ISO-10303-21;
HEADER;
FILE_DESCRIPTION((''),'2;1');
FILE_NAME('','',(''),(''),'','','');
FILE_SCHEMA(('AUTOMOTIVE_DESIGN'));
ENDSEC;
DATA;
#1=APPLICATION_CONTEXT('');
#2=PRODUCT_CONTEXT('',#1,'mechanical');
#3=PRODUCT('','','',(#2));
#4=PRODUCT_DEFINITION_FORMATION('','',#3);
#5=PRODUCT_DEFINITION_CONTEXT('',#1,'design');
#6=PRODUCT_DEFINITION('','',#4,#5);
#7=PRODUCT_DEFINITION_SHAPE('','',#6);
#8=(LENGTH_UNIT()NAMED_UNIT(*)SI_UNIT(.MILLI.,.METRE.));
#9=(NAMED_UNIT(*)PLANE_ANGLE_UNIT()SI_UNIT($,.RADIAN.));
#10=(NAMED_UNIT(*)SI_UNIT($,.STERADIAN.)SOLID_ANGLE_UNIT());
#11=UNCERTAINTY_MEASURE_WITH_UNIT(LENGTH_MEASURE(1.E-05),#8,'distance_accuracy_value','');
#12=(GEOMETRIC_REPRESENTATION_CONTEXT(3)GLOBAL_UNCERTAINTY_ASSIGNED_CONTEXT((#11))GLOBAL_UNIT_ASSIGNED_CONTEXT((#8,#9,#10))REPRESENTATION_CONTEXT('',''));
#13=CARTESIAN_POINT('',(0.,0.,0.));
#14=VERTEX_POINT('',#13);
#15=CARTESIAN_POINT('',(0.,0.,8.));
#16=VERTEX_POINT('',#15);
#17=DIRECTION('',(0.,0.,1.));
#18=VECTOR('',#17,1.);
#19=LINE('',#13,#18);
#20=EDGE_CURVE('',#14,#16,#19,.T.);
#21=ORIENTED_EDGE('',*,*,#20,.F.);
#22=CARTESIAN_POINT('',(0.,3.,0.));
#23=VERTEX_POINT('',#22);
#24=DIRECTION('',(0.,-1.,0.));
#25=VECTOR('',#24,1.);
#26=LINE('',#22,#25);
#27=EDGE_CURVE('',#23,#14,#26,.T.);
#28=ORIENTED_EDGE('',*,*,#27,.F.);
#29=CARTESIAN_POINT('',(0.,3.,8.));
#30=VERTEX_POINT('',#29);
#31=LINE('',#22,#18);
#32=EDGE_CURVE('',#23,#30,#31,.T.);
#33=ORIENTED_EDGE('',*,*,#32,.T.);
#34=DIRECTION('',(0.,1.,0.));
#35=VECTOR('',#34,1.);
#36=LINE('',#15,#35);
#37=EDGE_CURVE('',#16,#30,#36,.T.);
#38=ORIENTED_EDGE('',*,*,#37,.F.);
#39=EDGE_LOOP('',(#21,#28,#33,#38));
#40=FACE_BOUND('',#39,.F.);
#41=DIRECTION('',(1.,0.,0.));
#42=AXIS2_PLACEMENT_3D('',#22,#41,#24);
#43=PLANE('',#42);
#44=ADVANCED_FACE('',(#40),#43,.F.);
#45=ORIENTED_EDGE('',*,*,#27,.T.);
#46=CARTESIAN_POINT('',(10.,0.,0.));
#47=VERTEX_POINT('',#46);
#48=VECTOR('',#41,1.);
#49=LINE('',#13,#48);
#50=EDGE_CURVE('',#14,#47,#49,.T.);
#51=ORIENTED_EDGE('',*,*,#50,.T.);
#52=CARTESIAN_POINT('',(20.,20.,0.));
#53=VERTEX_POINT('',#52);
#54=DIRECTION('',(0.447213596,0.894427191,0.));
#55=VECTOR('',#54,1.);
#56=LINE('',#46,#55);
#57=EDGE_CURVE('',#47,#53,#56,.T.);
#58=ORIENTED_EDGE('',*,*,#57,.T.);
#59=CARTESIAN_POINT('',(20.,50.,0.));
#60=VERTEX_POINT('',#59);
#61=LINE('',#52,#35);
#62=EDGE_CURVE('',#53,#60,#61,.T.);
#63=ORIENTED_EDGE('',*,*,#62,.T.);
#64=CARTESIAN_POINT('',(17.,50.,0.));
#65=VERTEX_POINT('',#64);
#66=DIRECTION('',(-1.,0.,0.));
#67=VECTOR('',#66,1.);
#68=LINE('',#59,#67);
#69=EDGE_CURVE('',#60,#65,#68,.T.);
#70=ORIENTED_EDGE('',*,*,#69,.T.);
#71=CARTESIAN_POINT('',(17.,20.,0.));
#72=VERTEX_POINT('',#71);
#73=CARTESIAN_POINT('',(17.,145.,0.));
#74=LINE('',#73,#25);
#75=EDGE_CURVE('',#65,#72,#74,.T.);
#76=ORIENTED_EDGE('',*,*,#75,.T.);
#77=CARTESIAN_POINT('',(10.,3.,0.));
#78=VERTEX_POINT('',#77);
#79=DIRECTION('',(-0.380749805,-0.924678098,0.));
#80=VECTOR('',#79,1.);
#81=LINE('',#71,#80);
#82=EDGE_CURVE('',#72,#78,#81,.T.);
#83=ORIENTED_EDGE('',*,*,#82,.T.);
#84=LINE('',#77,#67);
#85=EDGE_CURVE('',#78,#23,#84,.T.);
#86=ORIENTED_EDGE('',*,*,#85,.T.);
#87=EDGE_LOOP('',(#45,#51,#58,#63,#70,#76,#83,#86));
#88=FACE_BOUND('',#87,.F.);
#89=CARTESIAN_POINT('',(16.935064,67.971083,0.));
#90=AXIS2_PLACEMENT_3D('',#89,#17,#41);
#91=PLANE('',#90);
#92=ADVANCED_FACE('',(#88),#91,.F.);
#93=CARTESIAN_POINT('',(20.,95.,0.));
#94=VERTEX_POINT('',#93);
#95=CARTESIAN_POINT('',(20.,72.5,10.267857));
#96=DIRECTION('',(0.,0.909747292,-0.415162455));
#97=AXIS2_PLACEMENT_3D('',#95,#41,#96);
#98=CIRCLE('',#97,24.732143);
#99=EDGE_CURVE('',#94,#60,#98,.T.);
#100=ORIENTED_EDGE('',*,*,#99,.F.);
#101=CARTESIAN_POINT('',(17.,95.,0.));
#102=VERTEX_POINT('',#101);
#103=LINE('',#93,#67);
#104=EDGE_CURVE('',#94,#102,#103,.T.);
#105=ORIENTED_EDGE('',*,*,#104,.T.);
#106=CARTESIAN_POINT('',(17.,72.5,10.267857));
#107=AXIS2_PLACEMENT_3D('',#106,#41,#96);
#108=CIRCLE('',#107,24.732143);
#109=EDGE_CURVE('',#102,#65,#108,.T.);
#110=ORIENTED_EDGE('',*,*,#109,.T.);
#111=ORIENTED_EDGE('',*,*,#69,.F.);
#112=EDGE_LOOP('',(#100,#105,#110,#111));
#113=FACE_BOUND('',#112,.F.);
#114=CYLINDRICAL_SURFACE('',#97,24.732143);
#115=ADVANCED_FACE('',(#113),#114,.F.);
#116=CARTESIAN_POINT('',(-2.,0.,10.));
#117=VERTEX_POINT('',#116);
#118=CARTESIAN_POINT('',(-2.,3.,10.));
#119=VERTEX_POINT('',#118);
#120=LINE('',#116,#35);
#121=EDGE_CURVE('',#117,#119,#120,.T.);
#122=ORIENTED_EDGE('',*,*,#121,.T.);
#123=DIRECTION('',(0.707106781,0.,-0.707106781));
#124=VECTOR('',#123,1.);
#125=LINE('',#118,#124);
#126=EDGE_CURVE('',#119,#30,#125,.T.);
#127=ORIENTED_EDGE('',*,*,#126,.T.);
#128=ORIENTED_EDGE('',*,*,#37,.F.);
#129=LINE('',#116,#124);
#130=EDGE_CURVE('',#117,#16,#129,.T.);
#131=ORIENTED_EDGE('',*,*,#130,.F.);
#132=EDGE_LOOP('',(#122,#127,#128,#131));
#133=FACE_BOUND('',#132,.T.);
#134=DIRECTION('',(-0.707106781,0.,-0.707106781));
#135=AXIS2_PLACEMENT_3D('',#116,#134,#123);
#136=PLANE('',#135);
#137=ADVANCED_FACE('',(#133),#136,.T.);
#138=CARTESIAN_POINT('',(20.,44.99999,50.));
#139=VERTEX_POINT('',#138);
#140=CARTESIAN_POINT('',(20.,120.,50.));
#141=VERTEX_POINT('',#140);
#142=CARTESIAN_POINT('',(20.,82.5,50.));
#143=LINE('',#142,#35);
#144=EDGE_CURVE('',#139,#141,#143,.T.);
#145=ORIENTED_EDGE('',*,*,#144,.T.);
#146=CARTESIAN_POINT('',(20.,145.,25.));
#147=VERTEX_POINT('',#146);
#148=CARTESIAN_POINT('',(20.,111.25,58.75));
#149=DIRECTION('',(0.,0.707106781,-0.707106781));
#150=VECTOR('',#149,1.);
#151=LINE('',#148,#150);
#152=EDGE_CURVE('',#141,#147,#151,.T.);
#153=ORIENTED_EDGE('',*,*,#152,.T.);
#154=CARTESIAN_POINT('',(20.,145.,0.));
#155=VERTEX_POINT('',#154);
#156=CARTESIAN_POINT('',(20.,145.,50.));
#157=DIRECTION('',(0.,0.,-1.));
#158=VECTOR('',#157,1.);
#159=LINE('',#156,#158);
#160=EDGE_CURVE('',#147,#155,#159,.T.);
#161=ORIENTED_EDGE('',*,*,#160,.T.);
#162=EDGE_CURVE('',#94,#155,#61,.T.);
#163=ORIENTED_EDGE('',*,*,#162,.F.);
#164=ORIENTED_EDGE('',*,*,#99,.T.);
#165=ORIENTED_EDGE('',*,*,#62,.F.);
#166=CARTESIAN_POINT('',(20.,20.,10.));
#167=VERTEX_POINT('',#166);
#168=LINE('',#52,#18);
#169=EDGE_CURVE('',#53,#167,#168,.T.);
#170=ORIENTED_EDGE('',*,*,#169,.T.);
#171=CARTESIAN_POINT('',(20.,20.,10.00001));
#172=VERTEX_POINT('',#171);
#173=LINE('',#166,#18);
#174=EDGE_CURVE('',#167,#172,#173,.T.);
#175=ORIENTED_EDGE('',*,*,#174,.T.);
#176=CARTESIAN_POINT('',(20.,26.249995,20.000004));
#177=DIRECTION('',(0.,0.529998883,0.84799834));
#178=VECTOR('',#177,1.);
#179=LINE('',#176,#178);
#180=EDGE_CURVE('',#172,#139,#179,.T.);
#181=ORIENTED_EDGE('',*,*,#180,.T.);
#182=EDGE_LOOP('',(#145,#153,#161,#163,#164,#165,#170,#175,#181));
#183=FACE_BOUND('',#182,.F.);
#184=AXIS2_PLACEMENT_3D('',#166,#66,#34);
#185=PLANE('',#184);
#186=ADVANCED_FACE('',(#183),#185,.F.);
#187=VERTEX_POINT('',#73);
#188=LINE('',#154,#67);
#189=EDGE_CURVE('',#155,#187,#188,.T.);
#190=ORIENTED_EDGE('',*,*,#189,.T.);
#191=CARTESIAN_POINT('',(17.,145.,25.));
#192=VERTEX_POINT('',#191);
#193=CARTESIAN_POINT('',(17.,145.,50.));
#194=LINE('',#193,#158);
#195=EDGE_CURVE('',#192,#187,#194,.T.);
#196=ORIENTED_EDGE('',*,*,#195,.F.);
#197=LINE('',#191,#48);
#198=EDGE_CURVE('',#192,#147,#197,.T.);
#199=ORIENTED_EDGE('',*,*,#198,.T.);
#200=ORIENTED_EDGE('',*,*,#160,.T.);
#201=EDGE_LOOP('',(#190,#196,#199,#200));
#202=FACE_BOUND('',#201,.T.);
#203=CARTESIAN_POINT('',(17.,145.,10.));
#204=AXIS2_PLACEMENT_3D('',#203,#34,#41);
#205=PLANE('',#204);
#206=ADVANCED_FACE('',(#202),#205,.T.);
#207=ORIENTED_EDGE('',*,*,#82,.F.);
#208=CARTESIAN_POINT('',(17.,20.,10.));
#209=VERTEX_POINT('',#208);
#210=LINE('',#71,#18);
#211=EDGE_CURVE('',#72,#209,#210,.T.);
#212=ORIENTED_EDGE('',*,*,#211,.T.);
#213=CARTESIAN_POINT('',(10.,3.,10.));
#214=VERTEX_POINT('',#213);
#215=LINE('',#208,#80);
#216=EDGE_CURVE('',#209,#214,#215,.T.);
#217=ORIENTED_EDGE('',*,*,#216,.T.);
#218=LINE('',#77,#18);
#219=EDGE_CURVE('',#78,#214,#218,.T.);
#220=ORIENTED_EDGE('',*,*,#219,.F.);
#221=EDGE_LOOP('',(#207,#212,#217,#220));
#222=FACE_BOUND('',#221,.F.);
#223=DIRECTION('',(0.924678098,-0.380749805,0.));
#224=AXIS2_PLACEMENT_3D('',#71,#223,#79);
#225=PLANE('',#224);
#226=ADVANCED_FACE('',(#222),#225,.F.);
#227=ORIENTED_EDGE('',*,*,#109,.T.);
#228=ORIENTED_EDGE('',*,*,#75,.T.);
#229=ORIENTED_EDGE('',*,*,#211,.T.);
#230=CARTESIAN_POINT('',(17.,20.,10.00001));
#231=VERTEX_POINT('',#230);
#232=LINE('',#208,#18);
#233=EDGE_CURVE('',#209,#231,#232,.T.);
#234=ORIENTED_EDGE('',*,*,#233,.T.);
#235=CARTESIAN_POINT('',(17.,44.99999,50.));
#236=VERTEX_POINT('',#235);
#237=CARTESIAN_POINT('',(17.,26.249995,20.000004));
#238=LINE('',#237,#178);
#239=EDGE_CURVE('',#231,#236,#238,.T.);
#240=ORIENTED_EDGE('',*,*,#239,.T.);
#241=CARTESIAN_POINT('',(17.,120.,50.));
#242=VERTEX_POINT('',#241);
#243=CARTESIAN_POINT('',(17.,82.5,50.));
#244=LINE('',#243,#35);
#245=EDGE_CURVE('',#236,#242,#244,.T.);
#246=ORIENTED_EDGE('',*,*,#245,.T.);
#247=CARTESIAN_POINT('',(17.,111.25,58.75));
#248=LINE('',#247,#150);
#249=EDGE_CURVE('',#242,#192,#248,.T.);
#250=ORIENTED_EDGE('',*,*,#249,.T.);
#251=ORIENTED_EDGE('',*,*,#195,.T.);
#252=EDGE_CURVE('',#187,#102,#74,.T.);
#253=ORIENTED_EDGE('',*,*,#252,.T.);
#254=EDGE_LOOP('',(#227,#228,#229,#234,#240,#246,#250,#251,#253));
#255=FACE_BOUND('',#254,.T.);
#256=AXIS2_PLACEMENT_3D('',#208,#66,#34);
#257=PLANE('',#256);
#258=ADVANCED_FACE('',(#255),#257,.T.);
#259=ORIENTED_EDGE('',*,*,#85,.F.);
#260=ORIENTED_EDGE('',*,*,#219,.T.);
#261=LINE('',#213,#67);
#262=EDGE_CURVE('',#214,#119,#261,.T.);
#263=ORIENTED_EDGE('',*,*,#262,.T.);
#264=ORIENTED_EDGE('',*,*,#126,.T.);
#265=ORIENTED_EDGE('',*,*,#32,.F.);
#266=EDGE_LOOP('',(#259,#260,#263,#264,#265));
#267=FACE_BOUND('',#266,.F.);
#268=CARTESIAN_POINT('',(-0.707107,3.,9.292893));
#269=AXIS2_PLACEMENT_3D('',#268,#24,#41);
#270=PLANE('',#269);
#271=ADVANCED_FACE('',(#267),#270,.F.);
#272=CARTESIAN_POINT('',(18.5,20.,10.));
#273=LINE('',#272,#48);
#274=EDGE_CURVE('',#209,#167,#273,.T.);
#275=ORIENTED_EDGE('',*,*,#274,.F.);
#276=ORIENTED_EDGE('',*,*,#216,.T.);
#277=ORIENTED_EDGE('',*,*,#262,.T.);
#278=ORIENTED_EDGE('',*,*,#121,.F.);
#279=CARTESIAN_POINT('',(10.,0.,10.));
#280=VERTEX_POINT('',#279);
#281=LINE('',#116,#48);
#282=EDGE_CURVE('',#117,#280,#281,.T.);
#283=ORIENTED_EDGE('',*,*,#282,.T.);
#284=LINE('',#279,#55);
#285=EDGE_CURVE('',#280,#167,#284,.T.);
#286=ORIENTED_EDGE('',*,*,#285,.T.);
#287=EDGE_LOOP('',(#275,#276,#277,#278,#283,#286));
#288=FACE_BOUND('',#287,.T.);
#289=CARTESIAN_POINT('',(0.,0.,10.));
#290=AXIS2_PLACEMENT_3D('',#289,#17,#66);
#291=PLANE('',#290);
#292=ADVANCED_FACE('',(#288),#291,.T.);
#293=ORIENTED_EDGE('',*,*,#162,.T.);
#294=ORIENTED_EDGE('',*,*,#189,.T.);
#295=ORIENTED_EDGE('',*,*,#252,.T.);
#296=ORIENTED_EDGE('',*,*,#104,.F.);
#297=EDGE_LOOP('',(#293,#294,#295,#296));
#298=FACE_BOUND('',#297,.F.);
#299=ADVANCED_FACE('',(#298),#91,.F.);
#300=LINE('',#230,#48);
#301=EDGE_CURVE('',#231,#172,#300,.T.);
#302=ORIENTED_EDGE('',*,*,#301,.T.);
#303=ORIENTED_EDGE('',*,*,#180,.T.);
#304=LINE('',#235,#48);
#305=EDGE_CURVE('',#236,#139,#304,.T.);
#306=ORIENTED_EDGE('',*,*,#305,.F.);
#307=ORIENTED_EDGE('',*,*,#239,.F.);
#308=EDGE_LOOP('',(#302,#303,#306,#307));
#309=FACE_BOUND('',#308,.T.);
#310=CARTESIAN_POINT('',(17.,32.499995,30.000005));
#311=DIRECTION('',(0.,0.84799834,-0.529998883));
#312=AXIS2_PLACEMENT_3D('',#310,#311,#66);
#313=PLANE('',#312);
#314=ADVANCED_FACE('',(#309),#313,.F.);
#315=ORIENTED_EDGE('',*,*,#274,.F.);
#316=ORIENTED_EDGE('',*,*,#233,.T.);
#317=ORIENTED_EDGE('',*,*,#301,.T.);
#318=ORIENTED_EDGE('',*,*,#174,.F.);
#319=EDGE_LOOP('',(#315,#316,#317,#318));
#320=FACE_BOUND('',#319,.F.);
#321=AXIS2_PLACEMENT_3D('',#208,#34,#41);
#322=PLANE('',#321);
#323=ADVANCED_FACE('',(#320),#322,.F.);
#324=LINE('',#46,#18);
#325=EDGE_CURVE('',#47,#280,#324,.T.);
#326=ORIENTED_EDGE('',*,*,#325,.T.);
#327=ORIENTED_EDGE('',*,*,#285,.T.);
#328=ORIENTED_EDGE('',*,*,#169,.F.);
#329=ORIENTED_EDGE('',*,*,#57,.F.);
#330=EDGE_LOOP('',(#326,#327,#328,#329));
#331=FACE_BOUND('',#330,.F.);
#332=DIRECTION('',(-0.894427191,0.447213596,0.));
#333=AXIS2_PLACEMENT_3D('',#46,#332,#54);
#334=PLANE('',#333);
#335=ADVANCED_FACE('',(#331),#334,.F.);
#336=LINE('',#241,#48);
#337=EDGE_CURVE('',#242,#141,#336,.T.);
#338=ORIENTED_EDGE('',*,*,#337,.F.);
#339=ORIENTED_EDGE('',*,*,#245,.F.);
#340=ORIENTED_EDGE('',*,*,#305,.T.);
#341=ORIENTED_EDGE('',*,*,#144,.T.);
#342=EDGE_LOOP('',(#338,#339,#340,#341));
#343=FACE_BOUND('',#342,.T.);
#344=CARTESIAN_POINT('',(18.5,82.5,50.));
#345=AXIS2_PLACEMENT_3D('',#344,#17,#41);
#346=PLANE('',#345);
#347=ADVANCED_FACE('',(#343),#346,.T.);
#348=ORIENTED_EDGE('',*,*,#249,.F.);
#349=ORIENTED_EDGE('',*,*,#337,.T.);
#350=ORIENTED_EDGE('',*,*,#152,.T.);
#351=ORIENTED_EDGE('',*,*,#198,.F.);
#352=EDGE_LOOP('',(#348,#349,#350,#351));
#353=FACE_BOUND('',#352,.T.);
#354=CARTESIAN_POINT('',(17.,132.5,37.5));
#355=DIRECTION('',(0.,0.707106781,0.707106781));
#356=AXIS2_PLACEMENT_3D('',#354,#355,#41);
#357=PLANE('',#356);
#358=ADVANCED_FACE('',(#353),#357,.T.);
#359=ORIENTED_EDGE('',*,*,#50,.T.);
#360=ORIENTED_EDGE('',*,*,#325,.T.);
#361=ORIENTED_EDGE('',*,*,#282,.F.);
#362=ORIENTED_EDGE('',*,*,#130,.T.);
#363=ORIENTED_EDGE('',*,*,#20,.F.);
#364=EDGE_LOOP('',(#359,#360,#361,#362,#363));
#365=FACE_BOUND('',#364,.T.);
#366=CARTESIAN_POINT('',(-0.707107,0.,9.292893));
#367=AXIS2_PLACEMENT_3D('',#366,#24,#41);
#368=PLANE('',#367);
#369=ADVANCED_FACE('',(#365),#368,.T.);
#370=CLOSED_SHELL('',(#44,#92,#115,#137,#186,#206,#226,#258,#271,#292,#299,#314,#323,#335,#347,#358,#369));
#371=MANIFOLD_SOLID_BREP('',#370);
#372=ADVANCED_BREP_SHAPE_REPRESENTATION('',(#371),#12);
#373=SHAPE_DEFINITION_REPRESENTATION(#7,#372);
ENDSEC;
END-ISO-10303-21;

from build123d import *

# Parameters (mm, degrees)
F1_DEPTH = 10
F3_DEPTH = 3
F4_W     = 3
F4_H     = 125
F5_DEPTH = 40
F6_SIZE2 = 24.99999
F6_SIZE  = 39.99999
F7_SIZE  = 25
F9_DEPTH = 25


# Not quite as in the source:
# - a fillet or chamfer is up to 0.001 mm smaller than in the source, because OpenCascade refuses the exact size


with BuildPart() as f1:
    # F0 (on Top) → F1 (new body)
    with BuildSketch(Plane.XY):
        Polygon((0, 3), (0, 0), (10, 0), (20, 20), (20, 145), (17, 145), (17, 20), (10, 3), align=None)
    extrude(amount=F1_DEPTH)

    # F2 (on Front) → F3 (join)
    with BuildSketch(Plane.XZ):
        Polygon((0, 8), (0, 10), (-2, 10), align=None)
    extrude(amount=-F3_DEPTH)

    # F4 (on face) → F5 (join)
    with BuildSketch(Plane.XY.offset(10)):
        with Locations((18.5, 82.5)):
            Rectangle(F4_W, F4_H)
    extrude(amount=F5_DEPTH)

    # F6 (size 40 and 25 in the source; OpenCascade refuses exactly that, so slightly less here)
    f6_edges = [f1.edges().sort_by_distance(p)[0] for p in [
        (18.5, 20, 50),
    ]]
    f6_side = f1.faces().sort_by_distance((18.5, 20, 30))[0]
    chamfer(f6_edges, length=F6_SIZE, length2=F6_SIZE2, reference=f6_side)

    # F7
    f7_edges = [f1.edges().sort_by_distance(p)[0] for p in [
        (18.5, 145, 50),
    ]]
    chamfer(f7_edges, length=F7_SIZE)

    # F8 (on face) → F9 (cut)
    with BuildSketch(Plane.YZ.offset(20)):
        with BuildLine():
            Line((50, 0), (95, 0))
            ThreePointArc((95, 0), (72.5, 35), (50, 0))
        make_face()
    extrude(amount=-F9_DEPTH, mode=Mode.SUBTRACT)


solid = f1.part
